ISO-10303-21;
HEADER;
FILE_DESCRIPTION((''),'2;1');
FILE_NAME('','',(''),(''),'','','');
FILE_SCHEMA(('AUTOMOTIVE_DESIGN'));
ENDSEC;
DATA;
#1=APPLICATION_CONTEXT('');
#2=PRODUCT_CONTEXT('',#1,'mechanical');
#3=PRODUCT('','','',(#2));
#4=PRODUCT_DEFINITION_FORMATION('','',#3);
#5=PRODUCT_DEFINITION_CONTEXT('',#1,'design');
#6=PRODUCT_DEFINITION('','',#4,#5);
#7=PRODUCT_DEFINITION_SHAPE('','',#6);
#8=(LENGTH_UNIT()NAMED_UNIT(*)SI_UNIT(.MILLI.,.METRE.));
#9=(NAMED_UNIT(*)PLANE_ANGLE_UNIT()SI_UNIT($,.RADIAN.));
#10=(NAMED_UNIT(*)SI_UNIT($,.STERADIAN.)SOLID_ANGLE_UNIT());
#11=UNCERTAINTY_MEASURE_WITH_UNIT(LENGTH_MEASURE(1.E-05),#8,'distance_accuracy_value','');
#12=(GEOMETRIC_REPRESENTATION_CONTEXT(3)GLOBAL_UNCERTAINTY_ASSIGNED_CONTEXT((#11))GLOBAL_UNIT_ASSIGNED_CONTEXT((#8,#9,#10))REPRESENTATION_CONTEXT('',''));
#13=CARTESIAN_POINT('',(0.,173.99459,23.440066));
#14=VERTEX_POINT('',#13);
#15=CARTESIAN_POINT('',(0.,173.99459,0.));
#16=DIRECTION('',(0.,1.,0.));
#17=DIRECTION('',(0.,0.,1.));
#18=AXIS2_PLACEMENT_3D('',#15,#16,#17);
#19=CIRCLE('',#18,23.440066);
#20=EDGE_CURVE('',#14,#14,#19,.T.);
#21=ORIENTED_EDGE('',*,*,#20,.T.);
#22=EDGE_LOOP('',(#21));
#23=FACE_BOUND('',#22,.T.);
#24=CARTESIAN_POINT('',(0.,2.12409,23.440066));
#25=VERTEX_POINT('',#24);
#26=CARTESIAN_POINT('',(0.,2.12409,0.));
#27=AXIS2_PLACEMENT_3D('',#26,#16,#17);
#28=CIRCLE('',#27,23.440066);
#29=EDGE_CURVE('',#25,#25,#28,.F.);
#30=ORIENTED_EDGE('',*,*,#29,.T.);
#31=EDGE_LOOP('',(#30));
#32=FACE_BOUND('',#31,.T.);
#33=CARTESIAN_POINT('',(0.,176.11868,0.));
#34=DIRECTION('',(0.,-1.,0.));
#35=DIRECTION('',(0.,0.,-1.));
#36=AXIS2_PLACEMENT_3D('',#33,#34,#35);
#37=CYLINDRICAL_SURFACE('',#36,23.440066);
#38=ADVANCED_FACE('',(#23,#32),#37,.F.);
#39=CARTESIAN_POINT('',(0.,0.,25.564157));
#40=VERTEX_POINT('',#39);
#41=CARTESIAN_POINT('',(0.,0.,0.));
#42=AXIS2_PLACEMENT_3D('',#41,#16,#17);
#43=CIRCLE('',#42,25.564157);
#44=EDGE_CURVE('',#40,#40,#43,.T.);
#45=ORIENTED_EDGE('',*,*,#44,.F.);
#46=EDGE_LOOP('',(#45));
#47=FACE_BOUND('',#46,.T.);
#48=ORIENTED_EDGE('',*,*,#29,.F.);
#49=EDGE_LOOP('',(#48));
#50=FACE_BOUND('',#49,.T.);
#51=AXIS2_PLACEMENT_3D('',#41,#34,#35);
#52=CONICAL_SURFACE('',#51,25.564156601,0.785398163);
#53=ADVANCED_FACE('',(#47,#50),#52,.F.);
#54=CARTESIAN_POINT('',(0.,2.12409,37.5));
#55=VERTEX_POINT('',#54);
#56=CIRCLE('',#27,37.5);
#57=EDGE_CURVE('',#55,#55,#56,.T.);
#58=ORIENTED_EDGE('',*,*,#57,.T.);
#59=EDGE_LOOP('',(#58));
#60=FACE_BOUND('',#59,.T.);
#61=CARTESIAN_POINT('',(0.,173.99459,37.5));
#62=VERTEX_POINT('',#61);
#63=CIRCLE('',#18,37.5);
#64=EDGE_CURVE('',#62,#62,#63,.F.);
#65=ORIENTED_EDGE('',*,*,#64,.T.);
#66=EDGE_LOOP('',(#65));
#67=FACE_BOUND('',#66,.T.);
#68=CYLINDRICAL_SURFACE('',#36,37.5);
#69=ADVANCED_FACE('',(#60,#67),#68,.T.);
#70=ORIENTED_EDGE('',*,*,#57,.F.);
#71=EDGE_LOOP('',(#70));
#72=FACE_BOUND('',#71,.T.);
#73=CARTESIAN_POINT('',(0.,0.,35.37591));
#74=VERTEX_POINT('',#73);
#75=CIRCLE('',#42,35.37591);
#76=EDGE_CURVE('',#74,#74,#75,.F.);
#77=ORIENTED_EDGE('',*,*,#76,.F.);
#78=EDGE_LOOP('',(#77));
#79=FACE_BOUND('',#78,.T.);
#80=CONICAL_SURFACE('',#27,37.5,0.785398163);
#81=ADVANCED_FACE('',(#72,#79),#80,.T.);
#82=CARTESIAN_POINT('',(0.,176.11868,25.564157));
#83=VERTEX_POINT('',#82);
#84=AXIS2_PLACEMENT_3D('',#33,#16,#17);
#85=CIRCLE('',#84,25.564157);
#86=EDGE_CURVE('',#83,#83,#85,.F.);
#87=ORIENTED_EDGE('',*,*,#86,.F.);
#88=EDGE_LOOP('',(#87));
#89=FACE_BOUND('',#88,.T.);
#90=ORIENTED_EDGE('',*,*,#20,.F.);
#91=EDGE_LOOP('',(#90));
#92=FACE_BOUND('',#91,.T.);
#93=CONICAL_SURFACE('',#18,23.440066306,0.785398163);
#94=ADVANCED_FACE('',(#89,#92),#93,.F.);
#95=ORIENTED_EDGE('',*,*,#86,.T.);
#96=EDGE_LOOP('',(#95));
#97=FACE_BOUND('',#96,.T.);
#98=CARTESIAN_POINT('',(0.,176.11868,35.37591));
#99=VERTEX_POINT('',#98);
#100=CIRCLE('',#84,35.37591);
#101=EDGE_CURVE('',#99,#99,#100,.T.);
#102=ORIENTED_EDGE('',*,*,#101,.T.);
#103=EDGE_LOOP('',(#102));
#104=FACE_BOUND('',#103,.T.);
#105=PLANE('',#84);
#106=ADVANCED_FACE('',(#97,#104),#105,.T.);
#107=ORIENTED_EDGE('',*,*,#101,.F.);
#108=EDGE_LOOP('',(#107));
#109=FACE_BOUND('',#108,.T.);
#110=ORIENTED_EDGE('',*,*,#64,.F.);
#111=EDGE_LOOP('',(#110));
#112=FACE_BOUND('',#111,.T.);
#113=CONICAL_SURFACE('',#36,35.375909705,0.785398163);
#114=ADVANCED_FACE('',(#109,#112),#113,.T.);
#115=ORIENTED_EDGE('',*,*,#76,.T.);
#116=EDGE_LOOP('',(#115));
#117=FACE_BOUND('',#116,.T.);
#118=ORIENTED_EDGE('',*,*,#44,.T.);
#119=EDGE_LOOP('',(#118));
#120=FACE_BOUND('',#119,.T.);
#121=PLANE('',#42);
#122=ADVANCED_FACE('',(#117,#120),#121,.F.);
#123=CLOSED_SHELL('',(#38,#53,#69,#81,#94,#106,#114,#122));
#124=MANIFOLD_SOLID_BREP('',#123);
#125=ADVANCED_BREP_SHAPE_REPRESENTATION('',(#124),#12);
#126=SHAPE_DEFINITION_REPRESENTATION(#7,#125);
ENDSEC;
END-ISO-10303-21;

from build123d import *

# Parameters (mm, degrees)
SKETCH1_R           = 37.5
BOSS_EXTRUDE1_DEPTH = 176.118679991
SKETCH2_R           = 23.440066306
CUT_EXTRUDE1_DEPTH  = 184.930121084
CHAMFER1_SIZE       = 2.124090295


with BuildPart() as part:
    # Sketch1 → Boss-Extrude1 (new body)
    with BuildSketch(Plane(origin=(0, 0, 0), x_dir=(1, 0, 0), z_dir=(0, 1, 0))):
        Circle(SKETCH1_R)
    extrude(amount=BOSS_EXTRUDE1_DEPTH)

    # Sketch2 → Cut-Extrude1 (cut, through all)
    with BuildSketch(Plane(origin=(0, 0, 0), x_dir=(1, 0, 0), z_dir=(0, 1, 0))):
        Circle(SKETCH2_R)
    extrude(amount=CUT_EXTRUDE1_DEPTH, mode=Mode.SUBTRACT)

    # Chamfer1
    chamfer1_edges = [part.edges().sort_by_distance(p)[0] for p in [
        (-23.440066306, 176.118679991, 0),
        (-23.440066306, 0, 0),
        (-37.5, 0, 0),
        (-37.5, 176.118679991, 0),
    ]]
    chamfer(chamfer1_edges, length=CHAMFER1_SIZE)


solid = part.part
